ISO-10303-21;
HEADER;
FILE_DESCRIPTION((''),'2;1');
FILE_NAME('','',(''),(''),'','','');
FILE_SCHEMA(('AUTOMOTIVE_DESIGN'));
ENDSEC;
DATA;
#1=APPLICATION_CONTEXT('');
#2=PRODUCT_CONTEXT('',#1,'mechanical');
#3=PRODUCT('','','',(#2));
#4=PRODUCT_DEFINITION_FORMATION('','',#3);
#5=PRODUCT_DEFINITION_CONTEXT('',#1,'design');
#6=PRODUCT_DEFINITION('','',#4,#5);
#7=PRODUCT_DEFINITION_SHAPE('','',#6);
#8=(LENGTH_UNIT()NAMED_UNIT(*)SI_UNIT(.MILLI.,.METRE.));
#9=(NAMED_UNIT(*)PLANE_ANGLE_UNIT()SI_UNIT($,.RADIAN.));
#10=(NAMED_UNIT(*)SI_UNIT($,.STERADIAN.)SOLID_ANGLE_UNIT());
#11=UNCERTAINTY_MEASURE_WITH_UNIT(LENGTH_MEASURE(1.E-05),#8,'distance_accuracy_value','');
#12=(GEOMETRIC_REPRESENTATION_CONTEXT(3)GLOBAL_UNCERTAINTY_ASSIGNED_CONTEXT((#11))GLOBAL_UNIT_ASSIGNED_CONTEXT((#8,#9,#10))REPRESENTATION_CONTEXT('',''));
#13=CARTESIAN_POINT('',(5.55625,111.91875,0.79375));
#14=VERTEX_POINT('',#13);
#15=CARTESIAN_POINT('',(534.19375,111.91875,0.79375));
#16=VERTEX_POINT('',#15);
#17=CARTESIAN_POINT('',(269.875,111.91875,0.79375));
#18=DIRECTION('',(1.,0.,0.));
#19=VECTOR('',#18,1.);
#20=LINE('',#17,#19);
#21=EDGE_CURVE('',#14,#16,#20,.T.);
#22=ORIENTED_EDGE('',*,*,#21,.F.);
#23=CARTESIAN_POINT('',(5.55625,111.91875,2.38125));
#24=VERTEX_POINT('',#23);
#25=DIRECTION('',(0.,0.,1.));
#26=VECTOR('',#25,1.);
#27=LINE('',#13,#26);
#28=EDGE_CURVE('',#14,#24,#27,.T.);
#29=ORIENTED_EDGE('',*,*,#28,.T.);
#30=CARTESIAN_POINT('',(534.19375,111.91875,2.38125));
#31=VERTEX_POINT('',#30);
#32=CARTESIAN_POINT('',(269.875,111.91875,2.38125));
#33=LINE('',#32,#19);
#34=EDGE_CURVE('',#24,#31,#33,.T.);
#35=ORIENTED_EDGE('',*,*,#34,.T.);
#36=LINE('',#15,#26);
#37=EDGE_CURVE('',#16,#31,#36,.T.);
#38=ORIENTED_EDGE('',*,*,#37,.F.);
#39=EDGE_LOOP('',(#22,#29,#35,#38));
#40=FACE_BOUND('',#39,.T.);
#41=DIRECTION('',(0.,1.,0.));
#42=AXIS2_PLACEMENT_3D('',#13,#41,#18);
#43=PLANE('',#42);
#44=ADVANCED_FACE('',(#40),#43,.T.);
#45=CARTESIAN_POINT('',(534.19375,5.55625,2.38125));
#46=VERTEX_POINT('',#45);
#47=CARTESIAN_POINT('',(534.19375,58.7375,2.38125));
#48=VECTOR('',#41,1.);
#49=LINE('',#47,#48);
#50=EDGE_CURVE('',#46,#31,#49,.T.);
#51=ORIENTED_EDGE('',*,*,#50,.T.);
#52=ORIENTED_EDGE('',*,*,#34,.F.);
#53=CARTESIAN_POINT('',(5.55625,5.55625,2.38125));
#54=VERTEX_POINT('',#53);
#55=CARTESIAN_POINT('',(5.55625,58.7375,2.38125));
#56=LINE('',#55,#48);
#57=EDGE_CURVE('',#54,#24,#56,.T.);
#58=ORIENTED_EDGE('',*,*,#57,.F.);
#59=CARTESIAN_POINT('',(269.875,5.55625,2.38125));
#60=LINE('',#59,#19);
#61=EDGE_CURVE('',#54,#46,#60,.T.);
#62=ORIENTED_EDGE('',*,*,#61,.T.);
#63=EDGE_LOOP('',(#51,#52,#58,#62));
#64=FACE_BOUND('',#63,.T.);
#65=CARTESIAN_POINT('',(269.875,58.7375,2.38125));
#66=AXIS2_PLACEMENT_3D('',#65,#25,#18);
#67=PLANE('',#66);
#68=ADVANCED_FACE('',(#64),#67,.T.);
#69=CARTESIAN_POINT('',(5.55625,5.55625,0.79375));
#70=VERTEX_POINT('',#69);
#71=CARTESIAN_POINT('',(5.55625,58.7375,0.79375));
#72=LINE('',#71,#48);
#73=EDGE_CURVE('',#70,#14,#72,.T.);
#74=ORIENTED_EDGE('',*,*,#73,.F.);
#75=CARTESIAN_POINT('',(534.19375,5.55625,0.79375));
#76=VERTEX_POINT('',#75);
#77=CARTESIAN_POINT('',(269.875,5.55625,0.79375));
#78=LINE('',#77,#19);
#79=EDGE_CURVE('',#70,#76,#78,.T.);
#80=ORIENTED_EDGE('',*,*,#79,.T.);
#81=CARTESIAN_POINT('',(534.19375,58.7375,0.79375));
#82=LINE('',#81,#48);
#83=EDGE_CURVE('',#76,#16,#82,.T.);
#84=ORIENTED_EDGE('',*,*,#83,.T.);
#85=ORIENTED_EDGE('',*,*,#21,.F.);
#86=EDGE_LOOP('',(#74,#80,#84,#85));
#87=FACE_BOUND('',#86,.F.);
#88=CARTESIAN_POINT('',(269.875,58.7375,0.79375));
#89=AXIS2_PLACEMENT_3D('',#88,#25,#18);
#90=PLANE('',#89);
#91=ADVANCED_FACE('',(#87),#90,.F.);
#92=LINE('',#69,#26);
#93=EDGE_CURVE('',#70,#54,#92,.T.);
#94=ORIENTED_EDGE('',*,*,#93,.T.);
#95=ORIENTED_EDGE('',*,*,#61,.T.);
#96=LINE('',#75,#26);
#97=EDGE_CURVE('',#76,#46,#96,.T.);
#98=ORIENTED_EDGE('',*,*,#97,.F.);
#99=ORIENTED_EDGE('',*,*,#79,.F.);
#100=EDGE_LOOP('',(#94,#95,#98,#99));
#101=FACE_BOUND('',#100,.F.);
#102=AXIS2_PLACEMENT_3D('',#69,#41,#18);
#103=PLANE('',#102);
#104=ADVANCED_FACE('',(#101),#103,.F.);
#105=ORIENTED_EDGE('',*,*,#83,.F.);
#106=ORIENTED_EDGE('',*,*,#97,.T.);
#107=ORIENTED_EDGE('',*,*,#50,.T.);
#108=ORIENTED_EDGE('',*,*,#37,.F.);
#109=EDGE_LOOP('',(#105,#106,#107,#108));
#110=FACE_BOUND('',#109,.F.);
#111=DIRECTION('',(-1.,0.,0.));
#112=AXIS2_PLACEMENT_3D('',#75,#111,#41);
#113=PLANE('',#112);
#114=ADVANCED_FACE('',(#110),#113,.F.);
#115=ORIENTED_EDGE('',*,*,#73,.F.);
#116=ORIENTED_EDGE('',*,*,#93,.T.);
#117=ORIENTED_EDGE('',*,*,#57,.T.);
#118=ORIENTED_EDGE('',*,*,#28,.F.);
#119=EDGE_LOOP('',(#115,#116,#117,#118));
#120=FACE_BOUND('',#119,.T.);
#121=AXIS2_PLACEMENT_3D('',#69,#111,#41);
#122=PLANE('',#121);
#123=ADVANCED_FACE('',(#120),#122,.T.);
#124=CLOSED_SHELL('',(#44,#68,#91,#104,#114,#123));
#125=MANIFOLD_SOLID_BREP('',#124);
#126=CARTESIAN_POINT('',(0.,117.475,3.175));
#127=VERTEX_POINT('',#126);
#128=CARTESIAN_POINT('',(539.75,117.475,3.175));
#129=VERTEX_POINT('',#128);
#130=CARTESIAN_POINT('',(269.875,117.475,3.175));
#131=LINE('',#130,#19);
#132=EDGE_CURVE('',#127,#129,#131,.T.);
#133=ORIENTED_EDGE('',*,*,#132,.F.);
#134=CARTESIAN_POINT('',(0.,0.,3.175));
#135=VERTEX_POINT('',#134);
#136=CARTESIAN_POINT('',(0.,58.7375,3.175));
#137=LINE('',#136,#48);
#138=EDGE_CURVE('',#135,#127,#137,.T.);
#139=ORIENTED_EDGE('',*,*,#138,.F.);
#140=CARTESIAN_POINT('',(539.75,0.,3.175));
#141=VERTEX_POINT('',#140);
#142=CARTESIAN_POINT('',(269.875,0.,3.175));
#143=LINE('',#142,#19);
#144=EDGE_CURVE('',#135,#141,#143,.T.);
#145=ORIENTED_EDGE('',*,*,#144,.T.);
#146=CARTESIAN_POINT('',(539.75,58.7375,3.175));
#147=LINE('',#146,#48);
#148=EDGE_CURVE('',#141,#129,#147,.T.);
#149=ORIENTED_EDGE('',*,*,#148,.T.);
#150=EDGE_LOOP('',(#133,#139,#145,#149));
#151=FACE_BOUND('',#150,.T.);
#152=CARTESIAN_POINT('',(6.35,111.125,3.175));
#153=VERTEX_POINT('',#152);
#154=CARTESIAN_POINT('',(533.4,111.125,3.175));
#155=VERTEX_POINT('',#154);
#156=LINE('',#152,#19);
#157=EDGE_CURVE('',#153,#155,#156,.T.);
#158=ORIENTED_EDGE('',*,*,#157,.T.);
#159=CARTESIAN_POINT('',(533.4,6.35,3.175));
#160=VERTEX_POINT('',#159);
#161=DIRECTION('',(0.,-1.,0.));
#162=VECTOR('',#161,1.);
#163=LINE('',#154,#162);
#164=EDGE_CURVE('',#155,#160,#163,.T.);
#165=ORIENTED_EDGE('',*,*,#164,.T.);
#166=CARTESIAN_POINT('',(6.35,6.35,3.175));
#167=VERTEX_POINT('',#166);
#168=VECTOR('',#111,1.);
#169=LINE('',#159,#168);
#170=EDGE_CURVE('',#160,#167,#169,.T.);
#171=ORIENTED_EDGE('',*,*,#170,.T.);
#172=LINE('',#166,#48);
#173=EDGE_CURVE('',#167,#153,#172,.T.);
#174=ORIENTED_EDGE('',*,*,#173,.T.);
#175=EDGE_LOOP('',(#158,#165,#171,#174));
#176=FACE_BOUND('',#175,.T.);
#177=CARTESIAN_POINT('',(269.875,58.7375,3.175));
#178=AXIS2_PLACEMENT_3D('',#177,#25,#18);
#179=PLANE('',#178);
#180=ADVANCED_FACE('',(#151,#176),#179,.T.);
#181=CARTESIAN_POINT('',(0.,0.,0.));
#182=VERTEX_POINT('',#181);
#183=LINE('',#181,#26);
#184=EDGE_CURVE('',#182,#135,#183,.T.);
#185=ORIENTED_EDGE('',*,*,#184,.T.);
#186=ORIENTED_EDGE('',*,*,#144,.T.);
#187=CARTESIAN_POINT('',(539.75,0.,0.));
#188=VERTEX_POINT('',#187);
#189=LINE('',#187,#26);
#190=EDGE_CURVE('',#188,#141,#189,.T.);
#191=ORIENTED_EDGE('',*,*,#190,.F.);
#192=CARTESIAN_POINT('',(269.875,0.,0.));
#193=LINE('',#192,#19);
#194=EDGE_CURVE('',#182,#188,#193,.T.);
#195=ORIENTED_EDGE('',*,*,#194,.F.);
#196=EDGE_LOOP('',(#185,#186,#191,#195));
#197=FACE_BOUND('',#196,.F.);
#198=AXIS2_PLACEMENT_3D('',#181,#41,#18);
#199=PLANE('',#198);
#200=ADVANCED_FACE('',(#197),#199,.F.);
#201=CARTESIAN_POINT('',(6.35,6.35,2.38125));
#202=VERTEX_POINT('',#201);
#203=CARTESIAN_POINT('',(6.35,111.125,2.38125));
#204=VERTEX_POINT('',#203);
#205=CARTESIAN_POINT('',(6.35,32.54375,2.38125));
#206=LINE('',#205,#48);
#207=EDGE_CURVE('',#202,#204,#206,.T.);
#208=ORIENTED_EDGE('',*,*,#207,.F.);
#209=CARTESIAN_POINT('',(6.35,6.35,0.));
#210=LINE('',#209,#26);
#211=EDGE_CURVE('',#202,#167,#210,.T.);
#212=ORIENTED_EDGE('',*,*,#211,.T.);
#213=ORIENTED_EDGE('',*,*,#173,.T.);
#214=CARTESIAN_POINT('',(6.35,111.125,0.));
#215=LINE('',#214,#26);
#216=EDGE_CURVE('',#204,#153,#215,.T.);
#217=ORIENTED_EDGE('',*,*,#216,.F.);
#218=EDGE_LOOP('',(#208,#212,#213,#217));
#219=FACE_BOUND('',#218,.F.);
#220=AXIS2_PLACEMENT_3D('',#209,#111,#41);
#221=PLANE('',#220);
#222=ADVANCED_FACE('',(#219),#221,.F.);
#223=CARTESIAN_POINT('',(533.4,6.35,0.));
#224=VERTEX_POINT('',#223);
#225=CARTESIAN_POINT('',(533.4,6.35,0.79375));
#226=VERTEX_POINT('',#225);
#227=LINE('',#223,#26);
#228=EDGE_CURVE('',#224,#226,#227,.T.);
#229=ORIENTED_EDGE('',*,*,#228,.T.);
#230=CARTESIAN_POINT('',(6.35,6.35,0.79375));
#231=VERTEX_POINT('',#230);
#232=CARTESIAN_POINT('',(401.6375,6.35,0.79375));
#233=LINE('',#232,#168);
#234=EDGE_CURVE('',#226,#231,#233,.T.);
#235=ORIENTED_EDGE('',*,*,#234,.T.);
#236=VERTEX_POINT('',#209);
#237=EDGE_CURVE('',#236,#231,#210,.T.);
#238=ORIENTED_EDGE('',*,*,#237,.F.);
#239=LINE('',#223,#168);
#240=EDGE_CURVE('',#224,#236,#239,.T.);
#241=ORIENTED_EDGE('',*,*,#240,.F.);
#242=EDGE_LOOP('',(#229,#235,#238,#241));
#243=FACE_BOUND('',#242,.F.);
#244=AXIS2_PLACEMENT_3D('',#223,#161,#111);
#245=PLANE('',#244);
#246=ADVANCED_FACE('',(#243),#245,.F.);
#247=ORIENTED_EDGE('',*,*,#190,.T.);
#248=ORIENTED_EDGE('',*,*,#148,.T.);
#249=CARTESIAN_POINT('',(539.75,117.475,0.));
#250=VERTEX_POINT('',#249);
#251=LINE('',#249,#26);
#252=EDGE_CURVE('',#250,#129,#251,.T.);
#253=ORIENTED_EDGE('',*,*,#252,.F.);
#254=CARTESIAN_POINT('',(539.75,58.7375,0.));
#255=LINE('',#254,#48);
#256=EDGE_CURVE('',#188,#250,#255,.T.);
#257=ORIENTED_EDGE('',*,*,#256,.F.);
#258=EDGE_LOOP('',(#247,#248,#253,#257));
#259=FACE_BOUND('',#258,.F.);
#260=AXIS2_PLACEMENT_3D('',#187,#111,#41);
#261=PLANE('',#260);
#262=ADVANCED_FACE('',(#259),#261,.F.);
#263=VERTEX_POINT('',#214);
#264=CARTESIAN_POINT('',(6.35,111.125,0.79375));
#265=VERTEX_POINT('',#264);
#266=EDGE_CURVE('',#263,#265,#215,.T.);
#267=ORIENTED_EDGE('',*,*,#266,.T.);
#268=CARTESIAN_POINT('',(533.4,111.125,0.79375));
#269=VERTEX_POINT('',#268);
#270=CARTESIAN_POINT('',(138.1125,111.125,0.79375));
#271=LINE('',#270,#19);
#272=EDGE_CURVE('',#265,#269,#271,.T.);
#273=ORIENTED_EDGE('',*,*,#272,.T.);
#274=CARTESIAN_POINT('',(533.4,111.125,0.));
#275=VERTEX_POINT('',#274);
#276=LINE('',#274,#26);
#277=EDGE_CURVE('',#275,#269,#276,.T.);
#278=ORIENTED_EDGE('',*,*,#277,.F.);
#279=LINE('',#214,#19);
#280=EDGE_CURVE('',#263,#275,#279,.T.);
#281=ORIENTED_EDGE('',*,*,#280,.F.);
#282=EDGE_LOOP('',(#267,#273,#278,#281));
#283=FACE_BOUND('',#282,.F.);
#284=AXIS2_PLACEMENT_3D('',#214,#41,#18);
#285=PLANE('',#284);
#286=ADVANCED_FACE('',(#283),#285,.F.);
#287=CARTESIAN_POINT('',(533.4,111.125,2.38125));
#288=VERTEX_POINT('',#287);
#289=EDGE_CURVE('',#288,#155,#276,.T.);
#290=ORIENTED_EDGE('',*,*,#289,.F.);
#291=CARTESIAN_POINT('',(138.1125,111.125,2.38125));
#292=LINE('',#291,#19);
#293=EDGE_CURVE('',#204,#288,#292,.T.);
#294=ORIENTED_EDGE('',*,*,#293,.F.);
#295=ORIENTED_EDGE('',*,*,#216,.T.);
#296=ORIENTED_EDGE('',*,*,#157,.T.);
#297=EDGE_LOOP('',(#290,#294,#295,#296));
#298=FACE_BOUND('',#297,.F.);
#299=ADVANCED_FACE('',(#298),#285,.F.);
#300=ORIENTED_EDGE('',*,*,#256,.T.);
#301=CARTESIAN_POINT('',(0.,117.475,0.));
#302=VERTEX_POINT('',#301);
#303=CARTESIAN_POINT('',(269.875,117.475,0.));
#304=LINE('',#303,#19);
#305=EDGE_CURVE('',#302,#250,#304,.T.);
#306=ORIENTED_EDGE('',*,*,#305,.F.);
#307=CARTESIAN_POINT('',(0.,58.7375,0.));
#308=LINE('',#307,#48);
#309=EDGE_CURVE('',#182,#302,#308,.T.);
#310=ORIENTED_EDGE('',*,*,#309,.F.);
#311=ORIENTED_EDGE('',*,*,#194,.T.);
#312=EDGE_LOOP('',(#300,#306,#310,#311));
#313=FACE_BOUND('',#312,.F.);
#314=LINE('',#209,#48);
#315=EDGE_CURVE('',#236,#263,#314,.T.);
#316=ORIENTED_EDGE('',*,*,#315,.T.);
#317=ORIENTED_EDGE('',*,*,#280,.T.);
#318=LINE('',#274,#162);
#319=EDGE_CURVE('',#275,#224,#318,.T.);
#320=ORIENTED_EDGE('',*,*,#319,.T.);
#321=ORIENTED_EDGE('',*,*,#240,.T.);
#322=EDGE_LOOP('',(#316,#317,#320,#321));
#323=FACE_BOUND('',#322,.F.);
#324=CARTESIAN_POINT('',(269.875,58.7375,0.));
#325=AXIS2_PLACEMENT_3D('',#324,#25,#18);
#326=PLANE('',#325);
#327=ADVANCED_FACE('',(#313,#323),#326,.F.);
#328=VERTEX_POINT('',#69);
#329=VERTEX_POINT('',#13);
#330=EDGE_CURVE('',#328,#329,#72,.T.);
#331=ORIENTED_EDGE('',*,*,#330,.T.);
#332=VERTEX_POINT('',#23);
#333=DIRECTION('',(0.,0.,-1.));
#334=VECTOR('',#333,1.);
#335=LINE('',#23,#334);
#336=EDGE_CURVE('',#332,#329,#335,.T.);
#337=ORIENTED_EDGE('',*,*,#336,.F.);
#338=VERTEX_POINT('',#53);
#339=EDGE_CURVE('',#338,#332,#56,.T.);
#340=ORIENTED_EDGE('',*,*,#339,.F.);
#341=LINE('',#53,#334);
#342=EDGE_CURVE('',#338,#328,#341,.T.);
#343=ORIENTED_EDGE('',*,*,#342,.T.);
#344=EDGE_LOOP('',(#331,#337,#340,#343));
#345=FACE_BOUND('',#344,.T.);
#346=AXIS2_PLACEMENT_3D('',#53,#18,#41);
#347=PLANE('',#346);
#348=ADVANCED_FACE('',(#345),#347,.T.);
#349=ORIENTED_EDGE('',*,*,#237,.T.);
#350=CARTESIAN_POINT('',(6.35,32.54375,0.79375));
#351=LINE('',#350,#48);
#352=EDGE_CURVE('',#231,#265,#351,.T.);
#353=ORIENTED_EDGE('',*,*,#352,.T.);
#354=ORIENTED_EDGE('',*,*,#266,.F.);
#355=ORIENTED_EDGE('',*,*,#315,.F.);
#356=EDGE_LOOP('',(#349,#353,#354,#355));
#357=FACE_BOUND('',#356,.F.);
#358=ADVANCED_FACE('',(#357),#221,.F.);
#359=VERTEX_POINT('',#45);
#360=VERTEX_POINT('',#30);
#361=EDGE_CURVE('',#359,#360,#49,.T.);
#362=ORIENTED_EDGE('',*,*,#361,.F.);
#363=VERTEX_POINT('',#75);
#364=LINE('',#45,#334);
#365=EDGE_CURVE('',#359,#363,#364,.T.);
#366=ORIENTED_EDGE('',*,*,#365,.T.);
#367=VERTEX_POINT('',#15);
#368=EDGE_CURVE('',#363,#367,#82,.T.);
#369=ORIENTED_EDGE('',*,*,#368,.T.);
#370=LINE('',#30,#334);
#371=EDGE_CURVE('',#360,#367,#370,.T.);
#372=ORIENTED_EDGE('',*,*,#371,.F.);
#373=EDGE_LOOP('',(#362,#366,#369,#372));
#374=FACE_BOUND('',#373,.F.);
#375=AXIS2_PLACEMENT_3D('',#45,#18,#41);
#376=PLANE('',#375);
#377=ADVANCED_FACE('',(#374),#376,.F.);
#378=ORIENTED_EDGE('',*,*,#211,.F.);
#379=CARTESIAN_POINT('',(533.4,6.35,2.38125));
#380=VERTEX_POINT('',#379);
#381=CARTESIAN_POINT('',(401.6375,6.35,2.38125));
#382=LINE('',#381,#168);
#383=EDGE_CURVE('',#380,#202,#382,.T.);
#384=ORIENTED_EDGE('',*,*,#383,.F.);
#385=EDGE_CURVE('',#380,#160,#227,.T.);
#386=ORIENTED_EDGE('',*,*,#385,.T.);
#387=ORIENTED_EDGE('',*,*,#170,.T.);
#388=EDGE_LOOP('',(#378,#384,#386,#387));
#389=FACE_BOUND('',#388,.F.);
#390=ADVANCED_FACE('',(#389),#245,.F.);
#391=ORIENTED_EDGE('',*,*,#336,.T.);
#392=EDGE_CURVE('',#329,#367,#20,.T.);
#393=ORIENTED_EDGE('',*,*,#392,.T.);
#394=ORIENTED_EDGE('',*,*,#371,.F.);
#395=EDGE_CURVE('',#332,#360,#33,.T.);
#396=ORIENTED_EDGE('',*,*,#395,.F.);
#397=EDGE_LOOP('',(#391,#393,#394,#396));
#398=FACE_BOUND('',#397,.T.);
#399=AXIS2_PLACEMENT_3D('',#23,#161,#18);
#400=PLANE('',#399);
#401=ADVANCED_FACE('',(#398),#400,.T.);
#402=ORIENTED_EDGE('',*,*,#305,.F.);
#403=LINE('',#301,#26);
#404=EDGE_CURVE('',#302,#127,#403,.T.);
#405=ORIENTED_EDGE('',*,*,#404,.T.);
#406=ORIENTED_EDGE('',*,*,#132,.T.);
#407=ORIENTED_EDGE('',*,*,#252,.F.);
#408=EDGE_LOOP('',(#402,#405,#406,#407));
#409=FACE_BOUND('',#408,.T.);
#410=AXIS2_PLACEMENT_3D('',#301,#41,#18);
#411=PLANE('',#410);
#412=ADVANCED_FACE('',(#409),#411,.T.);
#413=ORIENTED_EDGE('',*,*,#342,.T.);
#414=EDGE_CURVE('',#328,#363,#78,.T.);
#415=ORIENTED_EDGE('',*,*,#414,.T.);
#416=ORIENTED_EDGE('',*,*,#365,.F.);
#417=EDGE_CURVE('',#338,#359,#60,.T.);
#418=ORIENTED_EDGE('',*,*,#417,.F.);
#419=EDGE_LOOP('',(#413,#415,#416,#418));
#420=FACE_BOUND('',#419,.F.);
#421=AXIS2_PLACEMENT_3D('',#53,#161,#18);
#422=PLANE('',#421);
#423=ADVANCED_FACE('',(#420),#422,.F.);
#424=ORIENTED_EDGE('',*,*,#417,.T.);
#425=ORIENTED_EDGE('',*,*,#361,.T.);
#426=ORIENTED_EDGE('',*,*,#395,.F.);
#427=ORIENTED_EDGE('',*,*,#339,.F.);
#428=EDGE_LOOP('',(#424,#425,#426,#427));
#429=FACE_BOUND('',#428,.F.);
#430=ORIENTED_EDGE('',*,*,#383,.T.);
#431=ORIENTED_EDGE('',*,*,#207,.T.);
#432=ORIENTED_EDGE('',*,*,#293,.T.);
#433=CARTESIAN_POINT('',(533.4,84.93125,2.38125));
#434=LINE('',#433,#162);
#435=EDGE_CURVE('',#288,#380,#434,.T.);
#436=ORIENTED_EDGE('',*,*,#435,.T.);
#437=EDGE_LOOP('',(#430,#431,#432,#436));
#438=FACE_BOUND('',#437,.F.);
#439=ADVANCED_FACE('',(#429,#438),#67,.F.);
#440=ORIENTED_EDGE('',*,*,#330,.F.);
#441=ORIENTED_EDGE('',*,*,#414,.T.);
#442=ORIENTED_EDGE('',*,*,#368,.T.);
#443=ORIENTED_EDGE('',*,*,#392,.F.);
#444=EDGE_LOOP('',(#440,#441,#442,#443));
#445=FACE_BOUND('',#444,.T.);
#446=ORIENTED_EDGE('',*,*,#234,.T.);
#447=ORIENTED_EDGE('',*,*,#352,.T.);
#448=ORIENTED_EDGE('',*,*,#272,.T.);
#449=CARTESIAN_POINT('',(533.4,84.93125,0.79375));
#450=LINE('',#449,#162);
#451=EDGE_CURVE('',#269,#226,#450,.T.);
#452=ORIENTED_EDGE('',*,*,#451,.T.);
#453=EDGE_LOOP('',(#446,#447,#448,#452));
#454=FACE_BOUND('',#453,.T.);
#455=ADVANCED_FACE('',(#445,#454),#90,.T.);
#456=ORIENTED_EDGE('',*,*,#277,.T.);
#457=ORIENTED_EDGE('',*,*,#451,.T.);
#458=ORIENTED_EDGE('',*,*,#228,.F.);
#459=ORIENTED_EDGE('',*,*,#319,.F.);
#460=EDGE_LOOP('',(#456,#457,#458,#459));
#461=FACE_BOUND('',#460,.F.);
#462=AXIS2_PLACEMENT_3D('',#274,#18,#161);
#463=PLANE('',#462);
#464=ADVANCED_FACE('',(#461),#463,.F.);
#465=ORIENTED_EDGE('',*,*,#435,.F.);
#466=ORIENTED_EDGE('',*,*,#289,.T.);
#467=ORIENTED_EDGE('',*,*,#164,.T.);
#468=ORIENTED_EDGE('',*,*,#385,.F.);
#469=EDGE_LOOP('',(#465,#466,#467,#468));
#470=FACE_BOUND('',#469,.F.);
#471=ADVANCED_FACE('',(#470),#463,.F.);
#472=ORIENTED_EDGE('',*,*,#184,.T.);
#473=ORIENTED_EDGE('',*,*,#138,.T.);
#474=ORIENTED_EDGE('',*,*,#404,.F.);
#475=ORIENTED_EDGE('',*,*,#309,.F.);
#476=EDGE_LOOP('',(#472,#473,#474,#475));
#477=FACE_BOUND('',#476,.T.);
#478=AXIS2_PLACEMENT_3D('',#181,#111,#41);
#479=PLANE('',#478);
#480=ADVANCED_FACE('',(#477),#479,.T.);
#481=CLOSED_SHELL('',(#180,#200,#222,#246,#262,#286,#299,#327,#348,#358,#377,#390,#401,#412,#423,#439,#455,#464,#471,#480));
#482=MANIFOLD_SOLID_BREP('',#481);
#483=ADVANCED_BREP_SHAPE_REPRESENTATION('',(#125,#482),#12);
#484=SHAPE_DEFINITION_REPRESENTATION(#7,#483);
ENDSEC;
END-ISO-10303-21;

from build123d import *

# Parameters (mm, degrees)
F0_W     = 539.75
F0_H     = 117.475
F1_DEPTH = 3.175
F2_W     = 528.6375
F2_H     = 106.3625
F3_DEPTH = 1.5875
F5_DEPTH = 1.5875


with BuildPart() as f1:
    # F0 (on Top) → F1 (new body)
    with BuildSketch(Plane.XY):
        with Locations((269.875, 58.7375)):
            Rectangle(F0_W, F0_H)
        Polygon((6.35, 6.35), (6.35, 57.15), (6.35, 111.125), (533.4, 111.125), (533.4, 6.35), align=None, mode=Mode.SUBTRACT)
    extrude(amount=F1_DEPTH)



with BuildPart() as f3:
    # F2 (on Top) → F3 (new body)
    with BuildSketch(Plane.XY):
        with Locations((270.66875, 59.53125)):
            Rectangle(F2_W, F2_H)
    extrude(amount=F3_DEPTH)


with BuildPart() as f3_1:
    # F4: moved
    add(f3.part.moved(Location((-0.79375, -0.79375, 0.79375))))


with BuildPart() as f1_1:
    add(f1.part)
    # F5 (cut): a face of the model
    f5_faces = [f3_1.part.faces().sort_by_distance(p)[0] for p in [
        (269.875, 58.7375, 2.38125),
    ]]
    extrude(f5_faces, amount=-F5_DEPTH, mode=Mode.SUBTRACT)


solid = Compound([f3_1.part, f1_1.part])
